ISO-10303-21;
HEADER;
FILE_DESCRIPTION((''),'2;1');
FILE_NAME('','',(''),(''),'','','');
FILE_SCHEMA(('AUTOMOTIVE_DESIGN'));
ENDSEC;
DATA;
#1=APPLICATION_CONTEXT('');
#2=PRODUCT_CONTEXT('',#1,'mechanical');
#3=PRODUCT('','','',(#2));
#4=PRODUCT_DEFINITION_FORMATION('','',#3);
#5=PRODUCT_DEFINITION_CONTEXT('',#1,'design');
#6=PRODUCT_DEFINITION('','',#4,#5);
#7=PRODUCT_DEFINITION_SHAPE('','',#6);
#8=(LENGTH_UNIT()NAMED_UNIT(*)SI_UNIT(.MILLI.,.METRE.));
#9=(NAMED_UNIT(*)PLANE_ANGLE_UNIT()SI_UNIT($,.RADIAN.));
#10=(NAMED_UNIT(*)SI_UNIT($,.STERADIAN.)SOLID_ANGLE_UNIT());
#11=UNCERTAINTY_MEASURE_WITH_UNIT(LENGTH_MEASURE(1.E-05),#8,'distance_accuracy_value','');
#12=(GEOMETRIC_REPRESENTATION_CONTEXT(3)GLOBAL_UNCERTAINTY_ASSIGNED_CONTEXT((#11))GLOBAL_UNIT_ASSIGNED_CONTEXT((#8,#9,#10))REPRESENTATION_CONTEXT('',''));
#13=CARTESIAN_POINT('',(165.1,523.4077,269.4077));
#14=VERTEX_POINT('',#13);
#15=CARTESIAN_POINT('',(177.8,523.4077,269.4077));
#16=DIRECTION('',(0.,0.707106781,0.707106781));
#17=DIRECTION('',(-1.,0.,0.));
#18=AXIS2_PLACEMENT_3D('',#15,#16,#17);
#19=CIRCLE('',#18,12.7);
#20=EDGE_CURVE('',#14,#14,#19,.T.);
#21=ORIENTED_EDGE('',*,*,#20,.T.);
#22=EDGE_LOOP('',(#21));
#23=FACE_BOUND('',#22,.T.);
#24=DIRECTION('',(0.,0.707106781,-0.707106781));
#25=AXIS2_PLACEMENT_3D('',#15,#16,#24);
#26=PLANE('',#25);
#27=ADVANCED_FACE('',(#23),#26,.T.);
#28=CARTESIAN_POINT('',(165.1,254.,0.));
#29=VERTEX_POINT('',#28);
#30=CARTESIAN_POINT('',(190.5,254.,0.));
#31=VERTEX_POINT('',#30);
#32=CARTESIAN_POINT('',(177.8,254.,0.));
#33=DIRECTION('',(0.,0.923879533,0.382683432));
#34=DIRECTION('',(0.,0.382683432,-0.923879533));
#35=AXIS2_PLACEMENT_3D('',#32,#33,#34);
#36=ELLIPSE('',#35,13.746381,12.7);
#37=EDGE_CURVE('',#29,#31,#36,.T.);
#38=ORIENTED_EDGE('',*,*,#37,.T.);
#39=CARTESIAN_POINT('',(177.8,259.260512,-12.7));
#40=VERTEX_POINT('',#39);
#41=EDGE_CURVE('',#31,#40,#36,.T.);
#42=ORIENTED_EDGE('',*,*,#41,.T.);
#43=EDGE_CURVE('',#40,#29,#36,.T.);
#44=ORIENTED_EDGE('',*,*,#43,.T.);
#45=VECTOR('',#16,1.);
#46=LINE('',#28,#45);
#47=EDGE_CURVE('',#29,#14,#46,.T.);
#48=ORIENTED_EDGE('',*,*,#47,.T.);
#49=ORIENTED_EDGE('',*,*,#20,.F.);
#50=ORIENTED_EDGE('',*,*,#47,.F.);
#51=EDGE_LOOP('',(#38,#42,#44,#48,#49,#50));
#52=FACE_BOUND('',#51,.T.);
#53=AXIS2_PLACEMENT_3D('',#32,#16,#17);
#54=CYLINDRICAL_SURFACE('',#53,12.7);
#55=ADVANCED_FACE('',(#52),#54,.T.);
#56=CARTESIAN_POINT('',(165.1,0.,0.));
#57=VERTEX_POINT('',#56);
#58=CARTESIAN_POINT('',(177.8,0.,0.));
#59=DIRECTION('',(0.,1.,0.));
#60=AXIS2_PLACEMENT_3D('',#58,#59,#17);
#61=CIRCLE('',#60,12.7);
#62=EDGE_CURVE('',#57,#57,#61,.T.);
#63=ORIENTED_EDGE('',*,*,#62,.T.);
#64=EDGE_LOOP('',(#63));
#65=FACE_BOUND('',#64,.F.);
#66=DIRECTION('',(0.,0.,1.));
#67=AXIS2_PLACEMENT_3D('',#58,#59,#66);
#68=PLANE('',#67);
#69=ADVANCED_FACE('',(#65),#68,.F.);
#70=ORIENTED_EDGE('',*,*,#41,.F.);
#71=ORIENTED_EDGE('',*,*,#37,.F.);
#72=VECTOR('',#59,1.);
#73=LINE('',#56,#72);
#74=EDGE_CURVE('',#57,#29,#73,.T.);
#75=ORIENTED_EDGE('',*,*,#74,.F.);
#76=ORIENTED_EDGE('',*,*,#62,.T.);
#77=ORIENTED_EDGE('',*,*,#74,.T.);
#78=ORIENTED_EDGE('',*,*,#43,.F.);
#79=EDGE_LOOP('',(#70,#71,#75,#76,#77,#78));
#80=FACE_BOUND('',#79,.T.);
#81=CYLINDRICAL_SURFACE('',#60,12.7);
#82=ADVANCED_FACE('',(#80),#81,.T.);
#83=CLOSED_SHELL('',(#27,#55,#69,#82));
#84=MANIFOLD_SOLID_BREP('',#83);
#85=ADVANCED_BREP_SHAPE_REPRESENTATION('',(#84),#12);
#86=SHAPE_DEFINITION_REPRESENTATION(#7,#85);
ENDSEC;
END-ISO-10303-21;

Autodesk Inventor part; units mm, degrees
ref_plane "XZ Plane" through (0, 0, 0) normal (0, 1, 0) x (-1, 0, 0)
ref_plane "XY Plane" through (0, 0, 0) normal (0, 0, 1) x (1, 0, 0)
sketch "Sketch1" plane through (0, 0, 0) normal (0, 1, 0) x (-1, 0, 0)
  circle A0 centre (-177.8, 0) radius 12.7
  point P0 (0, 0)
  dimension "d0" = 25.4
  dimension "d1" = 177.8
sketch "Sketch2" plane through (0, 0, 0) normal (0, 0, 1) x (1, 0, 0)
  line L0 (177.8, 0) -> (177.8, 254)
  point P0 (0, 0)
  dimension "d2" = 177.8
  dimension "d3" = 254
ref_plane "Work Plane1" through (177.8, 0, 0) normal (1, 0, 0) x (0, 1, 0)
sketch "Sketch3" plane through (177.8, 0, 0) normal (1, 0, 0) x (0, 1, 0)
  line L0 (0, 0) -> (254, 0) projected
  line L1 (254, 0) -> (523.4077, 269.4077)
  line L2 (254, 0) -> (635, 0) construction
  dimension "d5" = 381
  dimension "d6" = 45
sweep "Sweep1" add profiles "Sketch1" path "Sketch3"
properties part number "loganFixedPart"
